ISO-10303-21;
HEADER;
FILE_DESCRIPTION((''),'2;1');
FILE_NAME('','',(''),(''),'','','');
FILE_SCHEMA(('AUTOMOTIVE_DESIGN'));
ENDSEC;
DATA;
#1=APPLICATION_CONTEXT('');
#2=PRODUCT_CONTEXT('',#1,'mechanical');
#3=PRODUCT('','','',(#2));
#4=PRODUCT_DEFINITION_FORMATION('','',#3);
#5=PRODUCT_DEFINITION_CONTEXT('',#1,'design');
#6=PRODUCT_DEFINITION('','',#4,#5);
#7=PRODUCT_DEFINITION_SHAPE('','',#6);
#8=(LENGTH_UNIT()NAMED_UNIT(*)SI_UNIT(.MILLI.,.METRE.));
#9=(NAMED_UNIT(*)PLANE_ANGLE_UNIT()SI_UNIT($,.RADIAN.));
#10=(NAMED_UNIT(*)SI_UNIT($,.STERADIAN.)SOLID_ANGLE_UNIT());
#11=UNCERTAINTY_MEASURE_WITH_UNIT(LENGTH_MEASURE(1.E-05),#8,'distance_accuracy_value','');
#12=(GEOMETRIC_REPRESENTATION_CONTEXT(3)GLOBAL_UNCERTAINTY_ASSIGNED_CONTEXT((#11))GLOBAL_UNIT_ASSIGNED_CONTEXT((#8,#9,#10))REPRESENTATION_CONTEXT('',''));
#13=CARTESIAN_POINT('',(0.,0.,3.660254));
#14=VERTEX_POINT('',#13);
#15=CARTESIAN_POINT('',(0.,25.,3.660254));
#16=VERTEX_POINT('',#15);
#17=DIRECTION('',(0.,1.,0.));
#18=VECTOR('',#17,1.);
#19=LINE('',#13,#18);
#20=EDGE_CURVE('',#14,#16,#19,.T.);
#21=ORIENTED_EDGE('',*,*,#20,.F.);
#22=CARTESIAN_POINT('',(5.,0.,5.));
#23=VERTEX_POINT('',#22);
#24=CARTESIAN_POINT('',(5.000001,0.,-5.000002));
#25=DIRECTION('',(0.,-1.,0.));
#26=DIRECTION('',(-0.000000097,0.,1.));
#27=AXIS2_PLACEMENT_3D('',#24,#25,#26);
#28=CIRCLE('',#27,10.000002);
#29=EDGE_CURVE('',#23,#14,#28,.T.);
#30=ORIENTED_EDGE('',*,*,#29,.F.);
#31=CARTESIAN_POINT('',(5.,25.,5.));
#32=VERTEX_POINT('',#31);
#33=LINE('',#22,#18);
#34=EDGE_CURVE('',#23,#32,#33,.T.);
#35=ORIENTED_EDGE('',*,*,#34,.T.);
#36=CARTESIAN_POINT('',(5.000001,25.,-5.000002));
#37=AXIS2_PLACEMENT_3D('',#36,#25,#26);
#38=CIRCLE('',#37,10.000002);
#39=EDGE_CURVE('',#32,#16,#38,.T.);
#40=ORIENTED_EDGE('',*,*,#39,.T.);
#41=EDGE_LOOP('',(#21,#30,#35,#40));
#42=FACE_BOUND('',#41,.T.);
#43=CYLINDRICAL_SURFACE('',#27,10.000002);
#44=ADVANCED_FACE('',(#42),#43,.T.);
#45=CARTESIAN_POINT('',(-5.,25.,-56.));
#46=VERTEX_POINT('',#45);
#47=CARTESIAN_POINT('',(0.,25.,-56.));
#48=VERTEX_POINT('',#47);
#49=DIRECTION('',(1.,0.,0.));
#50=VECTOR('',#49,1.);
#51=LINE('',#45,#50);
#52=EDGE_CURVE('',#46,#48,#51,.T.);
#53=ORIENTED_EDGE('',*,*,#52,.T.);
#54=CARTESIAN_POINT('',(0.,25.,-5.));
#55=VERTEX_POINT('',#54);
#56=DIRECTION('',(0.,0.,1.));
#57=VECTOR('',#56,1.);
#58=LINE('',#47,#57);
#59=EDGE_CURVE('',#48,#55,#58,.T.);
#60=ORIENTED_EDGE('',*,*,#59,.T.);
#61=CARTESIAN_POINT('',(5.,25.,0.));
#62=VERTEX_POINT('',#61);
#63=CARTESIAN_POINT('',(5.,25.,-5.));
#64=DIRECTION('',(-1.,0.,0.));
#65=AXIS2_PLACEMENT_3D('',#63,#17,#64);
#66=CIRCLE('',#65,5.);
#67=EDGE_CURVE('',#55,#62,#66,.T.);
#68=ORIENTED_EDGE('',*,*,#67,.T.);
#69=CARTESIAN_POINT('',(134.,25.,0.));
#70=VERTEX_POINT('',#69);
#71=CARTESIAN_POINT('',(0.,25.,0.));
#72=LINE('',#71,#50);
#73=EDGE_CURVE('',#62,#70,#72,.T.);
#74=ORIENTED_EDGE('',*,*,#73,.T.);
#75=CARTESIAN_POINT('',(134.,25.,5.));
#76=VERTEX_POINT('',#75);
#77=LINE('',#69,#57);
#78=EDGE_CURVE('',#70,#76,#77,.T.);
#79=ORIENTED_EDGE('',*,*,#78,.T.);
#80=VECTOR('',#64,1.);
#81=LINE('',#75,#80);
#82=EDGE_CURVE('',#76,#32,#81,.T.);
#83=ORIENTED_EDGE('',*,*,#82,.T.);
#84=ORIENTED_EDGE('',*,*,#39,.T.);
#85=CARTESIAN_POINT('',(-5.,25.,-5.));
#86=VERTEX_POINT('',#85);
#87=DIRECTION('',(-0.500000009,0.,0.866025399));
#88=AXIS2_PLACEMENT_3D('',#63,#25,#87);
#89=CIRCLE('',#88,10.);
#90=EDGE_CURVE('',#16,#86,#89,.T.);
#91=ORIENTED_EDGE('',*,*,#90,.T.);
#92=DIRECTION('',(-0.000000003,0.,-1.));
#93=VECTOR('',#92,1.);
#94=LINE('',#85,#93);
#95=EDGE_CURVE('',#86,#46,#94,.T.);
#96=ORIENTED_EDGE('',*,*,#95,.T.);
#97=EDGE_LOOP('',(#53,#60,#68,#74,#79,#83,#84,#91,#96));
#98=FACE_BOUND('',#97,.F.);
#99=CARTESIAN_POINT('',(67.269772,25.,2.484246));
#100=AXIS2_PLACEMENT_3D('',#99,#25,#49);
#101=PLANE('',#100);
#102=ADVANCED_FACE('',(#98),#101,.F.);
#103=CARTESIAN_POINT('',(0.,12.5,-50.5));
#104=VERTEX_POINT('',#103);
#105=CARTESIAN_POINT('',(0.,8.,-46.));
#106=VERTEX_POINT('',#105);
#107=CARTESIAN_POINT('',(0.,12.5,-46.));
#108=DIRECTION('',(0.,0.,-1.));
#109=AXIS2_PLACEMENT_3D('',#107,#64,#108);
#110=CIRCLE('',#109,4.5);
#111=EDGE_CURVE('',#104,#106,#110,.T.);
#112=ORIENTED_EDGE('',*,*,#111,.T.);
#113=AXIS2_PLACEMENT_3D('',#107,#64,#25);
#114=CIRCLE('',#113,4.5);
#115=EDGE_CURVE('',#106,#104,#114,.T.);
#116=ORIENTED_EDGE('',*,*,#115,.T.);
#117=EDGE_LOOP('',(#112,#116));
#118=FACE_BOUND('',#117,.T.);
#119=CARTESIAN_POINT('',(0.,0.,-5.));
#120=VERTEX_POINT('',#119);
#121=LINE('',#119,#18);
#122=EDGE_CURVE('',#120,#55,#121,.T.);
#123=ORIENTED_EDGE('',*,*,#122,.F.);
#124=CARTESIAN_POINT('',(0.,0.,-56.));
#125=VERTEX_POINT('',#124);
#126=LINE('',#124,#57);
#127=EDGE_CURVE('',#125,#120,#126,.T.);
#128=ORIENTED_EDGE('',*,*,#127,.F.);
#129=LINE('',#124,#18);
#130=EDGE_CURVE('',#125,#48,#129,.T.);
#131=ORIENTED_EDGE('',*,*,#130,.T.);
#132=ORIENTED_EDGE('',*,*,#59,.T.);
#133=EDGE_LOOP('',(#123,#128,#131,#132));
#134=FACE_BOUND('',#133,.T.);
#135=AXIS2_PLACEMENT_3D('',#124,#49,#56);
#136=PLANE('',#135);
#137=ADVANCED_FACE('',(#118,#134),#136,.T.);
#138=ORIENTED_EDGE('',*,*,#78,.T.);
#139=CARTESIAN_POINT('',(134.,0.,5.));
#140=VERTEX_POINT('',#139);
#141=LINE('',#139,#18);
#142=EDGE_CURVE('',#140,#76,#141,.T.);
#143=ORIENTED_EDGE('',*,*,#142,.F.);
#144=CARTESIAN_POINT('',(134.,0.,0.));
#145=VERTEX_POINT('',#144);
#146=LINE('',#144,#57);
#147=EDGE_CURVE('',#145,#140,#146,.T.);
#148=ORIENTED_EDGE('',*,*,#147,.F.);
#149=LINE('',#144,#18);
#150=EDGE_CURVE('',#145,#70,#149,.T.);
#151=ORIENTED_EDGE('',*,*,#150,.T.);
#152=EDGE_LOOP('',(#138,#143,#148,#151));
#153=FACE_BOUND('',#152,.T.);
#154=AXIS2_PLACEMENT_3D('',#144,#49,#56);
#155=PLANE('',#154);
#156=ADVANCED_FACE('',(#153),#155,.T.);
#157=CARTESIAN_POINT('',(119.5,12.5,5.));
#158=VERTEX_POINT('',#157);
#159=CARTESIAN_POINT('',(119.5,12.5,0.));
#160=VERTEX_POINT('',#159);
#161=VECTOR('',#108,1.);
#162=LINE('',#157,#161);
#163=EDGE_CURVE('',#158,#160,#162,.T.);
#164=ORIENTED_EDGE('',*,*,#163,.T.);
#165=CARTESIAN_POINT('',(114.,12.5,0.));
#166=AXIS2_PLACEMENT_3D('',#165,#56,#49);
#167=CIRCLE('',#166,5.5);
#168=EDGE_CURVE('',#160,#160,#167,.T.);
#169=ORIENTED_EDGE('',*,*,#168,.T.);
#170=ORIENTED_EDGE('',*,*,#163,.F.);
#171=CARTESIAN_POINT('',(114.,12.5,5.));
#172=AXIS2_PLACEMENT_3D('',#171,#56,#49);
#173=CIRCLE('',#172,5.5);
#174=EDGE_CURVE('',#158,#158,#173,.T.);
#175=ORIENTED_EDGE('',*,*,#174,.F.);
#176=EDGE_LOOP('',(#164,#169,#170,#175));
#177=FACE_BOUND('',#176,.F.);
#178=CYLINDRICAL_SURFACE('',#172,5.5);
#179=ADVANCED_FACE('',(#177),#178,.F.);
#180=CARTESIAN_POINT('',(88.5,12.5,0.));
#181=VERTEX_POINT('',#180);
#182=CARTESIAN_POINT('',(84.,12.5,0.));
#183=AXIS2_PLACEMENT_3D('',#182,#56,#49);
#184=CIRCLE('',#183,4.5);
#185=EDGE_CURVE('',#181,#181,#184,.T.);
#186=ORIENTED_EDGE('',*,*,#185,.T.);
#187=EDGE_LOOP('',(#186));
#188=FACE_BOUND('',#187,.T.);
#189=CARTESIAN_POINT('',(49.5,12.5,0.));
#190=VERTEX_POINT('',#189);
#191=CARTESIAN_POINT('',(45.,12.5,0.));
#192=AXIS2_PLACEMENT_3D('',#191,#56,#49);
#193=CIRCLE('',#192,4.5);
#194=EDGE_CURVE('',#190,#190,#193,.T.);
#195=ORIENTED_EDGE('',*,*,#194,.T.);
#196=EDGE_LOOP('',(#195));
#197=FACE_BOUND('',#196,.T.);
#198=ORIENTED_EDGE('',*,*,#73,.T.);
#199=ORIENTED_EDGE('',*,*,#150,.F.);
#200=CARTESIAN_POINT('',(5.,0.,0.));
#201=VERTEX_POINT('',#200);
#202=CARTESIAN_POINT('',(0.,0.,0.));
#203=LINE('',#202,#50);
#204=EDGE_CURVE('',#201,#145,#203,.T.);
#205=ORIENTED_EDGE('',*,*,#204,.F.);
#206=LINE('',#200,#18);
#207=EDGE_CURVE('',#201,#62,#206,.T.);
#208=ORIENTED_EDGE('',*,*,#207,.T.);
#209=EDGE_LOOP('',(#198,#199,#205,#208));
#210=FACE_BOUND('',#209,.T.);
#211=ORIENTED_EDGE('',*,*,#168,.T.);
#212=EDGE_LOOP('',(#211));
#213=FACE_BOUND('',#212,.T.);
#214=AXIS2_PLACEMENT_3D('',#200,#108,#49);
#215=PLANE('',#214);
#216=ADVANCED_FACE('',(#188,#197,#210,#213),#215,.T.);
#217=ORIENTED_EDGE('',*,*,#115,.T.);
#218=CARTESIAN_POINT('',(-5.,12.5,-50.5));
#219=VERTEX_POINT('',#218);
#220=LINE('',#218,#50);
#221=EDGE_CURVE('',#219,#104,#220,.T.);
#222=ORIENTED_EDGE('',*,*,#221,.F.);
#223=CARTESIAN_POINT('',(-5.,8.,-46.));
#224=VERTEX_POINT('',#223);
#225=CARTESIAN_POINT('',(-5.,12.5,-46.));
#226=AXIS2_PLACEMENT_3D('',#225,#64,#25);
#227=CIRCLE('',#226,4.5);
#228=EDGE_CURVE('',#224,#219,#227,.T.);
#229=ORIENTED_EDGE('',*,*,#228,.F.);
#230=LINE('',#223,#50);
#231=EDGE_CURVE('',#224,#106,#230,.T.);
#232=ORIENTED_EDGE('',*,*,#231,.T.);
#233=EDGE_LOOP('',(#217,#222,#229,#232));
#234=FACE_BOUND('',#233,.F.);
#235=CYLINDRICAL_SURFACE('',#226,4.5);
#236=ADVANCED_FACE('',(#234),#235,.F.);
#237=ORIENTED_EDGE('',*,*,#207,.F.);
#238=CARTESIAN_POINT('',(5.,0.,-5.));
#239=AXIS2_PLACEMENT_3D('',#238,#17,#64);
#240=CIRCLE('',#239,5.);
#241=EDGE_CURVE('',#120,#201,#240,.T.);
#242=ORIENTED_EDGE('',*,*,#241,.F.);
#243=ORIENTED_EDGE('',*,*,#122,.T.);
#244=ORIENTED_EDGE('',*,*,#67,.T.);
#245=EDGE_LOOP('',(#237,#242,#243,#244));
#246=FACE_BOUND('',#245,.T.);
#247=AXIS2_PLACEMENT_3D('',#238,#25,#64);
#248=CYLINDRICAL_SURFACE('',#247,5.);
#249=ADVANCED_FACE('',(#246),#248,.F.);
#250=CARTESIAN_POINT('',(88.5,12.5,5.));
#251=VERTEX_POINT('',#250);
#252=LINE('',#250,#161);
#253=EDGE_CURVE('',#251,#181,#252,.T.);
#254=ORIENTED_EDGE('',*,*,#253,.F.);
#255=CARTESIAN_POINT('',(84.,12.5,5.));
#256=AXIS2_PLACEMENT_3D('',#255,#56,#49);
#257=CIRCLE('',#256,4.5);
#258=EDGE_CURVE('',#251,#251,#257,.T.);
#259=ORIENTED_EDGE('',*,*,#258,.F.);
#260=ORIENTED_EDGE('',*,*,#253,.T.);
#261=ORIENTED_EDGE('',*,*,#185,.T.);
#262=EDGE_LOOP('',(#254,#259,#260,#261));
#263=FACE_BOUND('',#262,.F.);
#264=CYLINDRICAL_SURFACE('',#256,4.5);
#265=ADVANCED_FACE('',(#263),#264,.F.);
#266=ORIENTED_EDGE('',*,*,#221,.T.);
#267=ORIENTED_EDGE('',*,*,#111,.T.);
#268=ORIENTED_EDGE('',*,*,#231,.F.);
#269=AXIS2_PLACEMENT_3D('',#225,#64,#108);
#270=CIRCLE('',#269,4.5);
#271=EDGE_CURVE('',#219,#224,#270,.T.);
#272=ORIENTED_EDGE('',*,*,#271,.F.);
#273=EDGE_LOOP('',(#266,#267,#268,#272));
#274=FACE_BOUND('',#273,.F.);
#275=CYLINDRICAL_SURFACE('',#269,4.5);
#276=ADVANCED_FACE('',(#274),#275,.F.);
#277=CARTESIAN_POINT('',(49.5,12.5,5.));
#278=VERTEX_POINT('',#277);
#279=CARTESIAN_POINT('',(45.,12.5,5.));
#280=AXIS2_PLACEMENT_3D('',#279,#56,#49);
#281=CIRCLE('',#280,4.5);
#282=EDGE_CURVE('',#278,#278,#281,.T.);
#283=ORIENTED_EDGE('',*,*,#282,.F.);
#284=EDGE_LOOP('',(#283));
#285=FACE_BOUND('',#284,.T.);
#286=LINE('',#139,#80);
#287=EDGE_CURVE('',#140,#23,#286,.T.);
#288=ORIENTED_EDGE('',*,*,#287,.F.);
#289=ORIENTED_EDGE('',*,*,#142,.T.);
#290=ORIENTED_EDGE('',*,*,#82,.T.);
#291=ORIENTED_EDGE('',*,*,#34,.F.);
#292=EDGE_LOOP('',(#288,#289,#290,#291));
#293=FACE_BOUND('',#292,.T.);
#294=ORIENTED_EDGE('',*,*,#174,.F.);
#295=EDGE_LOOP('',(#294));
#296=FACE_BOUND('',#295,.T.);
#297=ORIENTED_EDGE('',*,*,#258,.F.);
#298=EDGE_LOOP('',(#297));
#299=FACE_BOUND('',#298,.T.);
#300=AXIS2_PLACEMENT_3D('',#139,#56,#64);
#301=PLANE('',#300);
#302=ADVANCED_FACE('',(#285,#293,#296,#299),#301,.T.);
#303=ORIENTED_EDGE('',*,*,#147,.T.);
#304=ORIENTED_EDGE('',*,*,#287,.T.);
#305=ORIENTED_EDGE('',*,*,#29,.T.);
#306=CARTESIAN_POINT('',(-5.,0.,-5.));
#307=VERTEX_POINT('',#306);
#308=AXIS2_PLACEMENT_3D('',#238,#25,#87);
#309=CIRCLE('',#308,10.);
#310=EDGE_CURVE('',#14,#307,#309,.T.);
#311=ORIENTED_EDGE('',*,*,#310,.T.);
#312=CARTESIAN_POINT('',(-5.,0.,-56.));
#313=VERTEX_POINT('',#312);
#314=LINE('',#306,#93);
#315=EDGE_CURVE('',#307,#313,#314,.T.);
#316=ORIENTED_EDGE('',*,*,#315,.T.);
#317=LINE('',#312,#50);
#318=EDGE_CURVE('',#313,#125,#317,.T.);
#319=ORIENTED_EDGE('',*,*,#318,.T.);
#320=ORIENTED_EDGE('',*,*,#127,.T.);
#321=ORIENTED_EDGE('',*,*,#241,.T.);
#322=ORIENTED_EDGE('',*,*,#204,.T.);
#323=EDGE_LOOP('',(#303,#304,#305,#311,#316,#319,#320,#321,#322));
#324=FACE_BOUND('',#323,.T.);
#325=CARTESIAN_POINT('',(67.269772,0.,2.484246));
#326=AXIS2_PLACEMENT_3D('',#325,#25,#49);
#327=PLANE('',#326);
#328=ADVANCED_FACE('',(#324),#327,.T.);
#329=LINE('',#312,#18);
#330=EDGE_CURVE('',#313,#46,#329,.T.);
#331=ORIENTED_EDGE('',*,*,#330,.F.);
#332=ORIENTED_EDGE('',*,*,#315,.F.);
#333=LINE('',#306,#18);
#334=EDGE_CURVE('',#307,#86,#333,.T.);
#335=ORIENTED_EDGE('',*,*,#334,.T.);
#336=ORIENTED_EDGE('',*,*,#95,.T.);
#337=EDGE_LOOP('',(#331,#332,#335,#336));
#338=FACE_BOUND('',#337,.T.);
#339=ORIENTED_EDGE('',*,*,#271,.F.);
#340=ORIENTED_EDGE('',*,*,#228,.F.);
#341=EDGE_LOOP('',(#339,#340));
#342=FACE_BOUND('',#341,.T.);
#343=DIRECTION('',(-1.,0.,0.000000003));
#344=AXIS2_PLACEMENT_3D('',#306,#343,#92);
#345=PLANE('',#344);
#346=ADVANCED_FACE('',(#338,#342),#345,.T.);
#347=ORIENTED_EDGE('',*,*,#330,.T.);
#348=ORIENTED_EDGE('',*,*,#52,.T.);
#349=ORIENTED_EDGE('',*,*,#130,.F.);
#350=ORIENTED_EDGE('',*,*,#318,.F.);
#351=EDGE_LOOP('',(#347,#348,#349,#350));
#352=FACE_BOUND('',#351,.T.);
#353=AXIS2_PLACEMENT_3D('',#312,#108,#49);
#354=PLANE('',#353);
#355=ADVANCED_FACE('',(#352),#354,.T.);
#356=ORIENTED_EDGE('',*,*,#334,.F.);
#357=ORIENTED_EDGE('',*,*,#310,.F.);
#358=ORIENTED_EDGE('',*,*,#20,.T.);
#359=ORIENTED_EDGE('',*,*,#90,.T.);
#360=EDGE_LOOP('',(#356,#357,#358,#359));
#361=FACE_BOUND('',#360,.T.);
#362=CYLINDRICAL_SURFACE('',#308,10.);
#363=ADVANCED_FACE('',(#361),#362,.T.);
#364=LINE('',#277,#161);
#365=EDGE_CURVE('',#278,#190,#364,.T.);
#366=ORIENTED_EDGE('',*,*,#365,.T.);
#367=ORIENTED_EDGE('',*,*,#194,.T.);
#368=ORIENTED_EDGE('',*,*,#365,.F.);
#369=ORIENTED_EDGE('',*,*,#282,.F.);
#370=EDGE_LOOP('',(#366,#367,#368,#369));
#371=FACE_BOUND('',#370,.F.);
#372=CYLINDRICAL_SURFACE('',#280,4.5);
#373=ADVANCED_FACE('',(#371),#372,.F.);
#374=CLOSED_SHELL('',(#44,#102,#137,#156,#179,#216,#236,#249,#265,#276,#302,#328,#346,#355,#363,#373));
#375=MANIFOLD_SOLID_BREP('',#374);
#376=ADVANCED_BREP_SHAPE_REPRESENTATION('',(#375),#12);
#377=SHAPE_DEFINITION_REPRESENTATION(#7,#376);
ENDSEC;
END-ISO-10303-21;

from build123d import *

# Parameters (mm, degrees)
F1_DEPTH = 25
F2_R     = 5.5
F2_R_2   = 4.5
F3_DEPTH = 5
F4_DEPTH = 5
F6_DEPTH = 5


# Not quite as in the source:
# - ends of sketch curves that miss each other by under 0.0002 mm in the source are joined


with BuildPart() as f1:
    # F0 (on Front) → F1 (new body)
    with BuildSketch(Plane.XZ):
        with BuildLine():
            Line((134, 0), (134, 5))
            Line((134, 5), (5, 5))
            ThreePointArc((5, 5), (2.4118095455, 4.6592580848), (0, 3.6602538402))
            Line((0, 3.6602538402), (0, 0))
            Line((0, 0), (5, 0))
            Line((5, 0), (134, 0))
        make_face()
        with BuildLine():
            Line((0, 0), (0, 3.6602538402))
            ThreePointArc((0, 3.6602538402), (-3.6602539143, -1.284e-07), (-4.9999998289, -5))
            Line((-4.9999998289, -5), (-5, -56))
            Line((-5, -56), (0, -56))
            Line((0, -56), (0, -5))
            Line((0, -5), (0, 0))
        make_face()
        with BuildLine():
            ThreePointArc((0, -5), (1.4644660941, -1.4644660941), (5, 0))
            Line((5, 0), (0, 0))
            Line((0, 0), (0, -5))
        make_face()
    extrude(amount=-F1_DEPTH)

    # F2 (on face) → F3 (cut)
    with BuildSketch(Plane.XY.offset(5)):
        with Locations((114, 12.5)):
            Circle(F2_R)
        with Locations((84, 12.5)):
            Circle(F2_R_2)
        with Locations((45, 12.5)):
            Circle(F2_R_2)
    extrude(amount=-F3_DEPTH, mode=Mode.SUBTRACT)

    # F2 (on face) → F4 (cut)
    with BuildSketch(Plane.XY.offset(5)):
        with Locations((114, 12.5)):
            Circle(F2_R)
        with Locations((84, 12.5)):
            Circle(F2_R_2)
        with Locations((45, 12.5)):
            Circle(F2_R_2)
    extrude(amount=-F4_DEPTH, mode=Mode.SUBTRACT)

    # F5 (on face) → F6 (cut)
    with BuildSketch(Plane(origin=(-5, 0, 0), x_dir=(0, -1, 0), z_dir=(-1, 0, 0))):
        with BuildLine():
            ThreePointArc((-12.5, -50.5), (-9.3180194847, -49.1819805153), (-8, -46))
            ThreePointArc((-8, -46), (-15.6819805153, -42.8180194847), (-12.5, -50.5))
        make_face()
    extrude(amount=-F6_DEPTH, mode=Mode.SUBTRACT)


solid = f1.part
